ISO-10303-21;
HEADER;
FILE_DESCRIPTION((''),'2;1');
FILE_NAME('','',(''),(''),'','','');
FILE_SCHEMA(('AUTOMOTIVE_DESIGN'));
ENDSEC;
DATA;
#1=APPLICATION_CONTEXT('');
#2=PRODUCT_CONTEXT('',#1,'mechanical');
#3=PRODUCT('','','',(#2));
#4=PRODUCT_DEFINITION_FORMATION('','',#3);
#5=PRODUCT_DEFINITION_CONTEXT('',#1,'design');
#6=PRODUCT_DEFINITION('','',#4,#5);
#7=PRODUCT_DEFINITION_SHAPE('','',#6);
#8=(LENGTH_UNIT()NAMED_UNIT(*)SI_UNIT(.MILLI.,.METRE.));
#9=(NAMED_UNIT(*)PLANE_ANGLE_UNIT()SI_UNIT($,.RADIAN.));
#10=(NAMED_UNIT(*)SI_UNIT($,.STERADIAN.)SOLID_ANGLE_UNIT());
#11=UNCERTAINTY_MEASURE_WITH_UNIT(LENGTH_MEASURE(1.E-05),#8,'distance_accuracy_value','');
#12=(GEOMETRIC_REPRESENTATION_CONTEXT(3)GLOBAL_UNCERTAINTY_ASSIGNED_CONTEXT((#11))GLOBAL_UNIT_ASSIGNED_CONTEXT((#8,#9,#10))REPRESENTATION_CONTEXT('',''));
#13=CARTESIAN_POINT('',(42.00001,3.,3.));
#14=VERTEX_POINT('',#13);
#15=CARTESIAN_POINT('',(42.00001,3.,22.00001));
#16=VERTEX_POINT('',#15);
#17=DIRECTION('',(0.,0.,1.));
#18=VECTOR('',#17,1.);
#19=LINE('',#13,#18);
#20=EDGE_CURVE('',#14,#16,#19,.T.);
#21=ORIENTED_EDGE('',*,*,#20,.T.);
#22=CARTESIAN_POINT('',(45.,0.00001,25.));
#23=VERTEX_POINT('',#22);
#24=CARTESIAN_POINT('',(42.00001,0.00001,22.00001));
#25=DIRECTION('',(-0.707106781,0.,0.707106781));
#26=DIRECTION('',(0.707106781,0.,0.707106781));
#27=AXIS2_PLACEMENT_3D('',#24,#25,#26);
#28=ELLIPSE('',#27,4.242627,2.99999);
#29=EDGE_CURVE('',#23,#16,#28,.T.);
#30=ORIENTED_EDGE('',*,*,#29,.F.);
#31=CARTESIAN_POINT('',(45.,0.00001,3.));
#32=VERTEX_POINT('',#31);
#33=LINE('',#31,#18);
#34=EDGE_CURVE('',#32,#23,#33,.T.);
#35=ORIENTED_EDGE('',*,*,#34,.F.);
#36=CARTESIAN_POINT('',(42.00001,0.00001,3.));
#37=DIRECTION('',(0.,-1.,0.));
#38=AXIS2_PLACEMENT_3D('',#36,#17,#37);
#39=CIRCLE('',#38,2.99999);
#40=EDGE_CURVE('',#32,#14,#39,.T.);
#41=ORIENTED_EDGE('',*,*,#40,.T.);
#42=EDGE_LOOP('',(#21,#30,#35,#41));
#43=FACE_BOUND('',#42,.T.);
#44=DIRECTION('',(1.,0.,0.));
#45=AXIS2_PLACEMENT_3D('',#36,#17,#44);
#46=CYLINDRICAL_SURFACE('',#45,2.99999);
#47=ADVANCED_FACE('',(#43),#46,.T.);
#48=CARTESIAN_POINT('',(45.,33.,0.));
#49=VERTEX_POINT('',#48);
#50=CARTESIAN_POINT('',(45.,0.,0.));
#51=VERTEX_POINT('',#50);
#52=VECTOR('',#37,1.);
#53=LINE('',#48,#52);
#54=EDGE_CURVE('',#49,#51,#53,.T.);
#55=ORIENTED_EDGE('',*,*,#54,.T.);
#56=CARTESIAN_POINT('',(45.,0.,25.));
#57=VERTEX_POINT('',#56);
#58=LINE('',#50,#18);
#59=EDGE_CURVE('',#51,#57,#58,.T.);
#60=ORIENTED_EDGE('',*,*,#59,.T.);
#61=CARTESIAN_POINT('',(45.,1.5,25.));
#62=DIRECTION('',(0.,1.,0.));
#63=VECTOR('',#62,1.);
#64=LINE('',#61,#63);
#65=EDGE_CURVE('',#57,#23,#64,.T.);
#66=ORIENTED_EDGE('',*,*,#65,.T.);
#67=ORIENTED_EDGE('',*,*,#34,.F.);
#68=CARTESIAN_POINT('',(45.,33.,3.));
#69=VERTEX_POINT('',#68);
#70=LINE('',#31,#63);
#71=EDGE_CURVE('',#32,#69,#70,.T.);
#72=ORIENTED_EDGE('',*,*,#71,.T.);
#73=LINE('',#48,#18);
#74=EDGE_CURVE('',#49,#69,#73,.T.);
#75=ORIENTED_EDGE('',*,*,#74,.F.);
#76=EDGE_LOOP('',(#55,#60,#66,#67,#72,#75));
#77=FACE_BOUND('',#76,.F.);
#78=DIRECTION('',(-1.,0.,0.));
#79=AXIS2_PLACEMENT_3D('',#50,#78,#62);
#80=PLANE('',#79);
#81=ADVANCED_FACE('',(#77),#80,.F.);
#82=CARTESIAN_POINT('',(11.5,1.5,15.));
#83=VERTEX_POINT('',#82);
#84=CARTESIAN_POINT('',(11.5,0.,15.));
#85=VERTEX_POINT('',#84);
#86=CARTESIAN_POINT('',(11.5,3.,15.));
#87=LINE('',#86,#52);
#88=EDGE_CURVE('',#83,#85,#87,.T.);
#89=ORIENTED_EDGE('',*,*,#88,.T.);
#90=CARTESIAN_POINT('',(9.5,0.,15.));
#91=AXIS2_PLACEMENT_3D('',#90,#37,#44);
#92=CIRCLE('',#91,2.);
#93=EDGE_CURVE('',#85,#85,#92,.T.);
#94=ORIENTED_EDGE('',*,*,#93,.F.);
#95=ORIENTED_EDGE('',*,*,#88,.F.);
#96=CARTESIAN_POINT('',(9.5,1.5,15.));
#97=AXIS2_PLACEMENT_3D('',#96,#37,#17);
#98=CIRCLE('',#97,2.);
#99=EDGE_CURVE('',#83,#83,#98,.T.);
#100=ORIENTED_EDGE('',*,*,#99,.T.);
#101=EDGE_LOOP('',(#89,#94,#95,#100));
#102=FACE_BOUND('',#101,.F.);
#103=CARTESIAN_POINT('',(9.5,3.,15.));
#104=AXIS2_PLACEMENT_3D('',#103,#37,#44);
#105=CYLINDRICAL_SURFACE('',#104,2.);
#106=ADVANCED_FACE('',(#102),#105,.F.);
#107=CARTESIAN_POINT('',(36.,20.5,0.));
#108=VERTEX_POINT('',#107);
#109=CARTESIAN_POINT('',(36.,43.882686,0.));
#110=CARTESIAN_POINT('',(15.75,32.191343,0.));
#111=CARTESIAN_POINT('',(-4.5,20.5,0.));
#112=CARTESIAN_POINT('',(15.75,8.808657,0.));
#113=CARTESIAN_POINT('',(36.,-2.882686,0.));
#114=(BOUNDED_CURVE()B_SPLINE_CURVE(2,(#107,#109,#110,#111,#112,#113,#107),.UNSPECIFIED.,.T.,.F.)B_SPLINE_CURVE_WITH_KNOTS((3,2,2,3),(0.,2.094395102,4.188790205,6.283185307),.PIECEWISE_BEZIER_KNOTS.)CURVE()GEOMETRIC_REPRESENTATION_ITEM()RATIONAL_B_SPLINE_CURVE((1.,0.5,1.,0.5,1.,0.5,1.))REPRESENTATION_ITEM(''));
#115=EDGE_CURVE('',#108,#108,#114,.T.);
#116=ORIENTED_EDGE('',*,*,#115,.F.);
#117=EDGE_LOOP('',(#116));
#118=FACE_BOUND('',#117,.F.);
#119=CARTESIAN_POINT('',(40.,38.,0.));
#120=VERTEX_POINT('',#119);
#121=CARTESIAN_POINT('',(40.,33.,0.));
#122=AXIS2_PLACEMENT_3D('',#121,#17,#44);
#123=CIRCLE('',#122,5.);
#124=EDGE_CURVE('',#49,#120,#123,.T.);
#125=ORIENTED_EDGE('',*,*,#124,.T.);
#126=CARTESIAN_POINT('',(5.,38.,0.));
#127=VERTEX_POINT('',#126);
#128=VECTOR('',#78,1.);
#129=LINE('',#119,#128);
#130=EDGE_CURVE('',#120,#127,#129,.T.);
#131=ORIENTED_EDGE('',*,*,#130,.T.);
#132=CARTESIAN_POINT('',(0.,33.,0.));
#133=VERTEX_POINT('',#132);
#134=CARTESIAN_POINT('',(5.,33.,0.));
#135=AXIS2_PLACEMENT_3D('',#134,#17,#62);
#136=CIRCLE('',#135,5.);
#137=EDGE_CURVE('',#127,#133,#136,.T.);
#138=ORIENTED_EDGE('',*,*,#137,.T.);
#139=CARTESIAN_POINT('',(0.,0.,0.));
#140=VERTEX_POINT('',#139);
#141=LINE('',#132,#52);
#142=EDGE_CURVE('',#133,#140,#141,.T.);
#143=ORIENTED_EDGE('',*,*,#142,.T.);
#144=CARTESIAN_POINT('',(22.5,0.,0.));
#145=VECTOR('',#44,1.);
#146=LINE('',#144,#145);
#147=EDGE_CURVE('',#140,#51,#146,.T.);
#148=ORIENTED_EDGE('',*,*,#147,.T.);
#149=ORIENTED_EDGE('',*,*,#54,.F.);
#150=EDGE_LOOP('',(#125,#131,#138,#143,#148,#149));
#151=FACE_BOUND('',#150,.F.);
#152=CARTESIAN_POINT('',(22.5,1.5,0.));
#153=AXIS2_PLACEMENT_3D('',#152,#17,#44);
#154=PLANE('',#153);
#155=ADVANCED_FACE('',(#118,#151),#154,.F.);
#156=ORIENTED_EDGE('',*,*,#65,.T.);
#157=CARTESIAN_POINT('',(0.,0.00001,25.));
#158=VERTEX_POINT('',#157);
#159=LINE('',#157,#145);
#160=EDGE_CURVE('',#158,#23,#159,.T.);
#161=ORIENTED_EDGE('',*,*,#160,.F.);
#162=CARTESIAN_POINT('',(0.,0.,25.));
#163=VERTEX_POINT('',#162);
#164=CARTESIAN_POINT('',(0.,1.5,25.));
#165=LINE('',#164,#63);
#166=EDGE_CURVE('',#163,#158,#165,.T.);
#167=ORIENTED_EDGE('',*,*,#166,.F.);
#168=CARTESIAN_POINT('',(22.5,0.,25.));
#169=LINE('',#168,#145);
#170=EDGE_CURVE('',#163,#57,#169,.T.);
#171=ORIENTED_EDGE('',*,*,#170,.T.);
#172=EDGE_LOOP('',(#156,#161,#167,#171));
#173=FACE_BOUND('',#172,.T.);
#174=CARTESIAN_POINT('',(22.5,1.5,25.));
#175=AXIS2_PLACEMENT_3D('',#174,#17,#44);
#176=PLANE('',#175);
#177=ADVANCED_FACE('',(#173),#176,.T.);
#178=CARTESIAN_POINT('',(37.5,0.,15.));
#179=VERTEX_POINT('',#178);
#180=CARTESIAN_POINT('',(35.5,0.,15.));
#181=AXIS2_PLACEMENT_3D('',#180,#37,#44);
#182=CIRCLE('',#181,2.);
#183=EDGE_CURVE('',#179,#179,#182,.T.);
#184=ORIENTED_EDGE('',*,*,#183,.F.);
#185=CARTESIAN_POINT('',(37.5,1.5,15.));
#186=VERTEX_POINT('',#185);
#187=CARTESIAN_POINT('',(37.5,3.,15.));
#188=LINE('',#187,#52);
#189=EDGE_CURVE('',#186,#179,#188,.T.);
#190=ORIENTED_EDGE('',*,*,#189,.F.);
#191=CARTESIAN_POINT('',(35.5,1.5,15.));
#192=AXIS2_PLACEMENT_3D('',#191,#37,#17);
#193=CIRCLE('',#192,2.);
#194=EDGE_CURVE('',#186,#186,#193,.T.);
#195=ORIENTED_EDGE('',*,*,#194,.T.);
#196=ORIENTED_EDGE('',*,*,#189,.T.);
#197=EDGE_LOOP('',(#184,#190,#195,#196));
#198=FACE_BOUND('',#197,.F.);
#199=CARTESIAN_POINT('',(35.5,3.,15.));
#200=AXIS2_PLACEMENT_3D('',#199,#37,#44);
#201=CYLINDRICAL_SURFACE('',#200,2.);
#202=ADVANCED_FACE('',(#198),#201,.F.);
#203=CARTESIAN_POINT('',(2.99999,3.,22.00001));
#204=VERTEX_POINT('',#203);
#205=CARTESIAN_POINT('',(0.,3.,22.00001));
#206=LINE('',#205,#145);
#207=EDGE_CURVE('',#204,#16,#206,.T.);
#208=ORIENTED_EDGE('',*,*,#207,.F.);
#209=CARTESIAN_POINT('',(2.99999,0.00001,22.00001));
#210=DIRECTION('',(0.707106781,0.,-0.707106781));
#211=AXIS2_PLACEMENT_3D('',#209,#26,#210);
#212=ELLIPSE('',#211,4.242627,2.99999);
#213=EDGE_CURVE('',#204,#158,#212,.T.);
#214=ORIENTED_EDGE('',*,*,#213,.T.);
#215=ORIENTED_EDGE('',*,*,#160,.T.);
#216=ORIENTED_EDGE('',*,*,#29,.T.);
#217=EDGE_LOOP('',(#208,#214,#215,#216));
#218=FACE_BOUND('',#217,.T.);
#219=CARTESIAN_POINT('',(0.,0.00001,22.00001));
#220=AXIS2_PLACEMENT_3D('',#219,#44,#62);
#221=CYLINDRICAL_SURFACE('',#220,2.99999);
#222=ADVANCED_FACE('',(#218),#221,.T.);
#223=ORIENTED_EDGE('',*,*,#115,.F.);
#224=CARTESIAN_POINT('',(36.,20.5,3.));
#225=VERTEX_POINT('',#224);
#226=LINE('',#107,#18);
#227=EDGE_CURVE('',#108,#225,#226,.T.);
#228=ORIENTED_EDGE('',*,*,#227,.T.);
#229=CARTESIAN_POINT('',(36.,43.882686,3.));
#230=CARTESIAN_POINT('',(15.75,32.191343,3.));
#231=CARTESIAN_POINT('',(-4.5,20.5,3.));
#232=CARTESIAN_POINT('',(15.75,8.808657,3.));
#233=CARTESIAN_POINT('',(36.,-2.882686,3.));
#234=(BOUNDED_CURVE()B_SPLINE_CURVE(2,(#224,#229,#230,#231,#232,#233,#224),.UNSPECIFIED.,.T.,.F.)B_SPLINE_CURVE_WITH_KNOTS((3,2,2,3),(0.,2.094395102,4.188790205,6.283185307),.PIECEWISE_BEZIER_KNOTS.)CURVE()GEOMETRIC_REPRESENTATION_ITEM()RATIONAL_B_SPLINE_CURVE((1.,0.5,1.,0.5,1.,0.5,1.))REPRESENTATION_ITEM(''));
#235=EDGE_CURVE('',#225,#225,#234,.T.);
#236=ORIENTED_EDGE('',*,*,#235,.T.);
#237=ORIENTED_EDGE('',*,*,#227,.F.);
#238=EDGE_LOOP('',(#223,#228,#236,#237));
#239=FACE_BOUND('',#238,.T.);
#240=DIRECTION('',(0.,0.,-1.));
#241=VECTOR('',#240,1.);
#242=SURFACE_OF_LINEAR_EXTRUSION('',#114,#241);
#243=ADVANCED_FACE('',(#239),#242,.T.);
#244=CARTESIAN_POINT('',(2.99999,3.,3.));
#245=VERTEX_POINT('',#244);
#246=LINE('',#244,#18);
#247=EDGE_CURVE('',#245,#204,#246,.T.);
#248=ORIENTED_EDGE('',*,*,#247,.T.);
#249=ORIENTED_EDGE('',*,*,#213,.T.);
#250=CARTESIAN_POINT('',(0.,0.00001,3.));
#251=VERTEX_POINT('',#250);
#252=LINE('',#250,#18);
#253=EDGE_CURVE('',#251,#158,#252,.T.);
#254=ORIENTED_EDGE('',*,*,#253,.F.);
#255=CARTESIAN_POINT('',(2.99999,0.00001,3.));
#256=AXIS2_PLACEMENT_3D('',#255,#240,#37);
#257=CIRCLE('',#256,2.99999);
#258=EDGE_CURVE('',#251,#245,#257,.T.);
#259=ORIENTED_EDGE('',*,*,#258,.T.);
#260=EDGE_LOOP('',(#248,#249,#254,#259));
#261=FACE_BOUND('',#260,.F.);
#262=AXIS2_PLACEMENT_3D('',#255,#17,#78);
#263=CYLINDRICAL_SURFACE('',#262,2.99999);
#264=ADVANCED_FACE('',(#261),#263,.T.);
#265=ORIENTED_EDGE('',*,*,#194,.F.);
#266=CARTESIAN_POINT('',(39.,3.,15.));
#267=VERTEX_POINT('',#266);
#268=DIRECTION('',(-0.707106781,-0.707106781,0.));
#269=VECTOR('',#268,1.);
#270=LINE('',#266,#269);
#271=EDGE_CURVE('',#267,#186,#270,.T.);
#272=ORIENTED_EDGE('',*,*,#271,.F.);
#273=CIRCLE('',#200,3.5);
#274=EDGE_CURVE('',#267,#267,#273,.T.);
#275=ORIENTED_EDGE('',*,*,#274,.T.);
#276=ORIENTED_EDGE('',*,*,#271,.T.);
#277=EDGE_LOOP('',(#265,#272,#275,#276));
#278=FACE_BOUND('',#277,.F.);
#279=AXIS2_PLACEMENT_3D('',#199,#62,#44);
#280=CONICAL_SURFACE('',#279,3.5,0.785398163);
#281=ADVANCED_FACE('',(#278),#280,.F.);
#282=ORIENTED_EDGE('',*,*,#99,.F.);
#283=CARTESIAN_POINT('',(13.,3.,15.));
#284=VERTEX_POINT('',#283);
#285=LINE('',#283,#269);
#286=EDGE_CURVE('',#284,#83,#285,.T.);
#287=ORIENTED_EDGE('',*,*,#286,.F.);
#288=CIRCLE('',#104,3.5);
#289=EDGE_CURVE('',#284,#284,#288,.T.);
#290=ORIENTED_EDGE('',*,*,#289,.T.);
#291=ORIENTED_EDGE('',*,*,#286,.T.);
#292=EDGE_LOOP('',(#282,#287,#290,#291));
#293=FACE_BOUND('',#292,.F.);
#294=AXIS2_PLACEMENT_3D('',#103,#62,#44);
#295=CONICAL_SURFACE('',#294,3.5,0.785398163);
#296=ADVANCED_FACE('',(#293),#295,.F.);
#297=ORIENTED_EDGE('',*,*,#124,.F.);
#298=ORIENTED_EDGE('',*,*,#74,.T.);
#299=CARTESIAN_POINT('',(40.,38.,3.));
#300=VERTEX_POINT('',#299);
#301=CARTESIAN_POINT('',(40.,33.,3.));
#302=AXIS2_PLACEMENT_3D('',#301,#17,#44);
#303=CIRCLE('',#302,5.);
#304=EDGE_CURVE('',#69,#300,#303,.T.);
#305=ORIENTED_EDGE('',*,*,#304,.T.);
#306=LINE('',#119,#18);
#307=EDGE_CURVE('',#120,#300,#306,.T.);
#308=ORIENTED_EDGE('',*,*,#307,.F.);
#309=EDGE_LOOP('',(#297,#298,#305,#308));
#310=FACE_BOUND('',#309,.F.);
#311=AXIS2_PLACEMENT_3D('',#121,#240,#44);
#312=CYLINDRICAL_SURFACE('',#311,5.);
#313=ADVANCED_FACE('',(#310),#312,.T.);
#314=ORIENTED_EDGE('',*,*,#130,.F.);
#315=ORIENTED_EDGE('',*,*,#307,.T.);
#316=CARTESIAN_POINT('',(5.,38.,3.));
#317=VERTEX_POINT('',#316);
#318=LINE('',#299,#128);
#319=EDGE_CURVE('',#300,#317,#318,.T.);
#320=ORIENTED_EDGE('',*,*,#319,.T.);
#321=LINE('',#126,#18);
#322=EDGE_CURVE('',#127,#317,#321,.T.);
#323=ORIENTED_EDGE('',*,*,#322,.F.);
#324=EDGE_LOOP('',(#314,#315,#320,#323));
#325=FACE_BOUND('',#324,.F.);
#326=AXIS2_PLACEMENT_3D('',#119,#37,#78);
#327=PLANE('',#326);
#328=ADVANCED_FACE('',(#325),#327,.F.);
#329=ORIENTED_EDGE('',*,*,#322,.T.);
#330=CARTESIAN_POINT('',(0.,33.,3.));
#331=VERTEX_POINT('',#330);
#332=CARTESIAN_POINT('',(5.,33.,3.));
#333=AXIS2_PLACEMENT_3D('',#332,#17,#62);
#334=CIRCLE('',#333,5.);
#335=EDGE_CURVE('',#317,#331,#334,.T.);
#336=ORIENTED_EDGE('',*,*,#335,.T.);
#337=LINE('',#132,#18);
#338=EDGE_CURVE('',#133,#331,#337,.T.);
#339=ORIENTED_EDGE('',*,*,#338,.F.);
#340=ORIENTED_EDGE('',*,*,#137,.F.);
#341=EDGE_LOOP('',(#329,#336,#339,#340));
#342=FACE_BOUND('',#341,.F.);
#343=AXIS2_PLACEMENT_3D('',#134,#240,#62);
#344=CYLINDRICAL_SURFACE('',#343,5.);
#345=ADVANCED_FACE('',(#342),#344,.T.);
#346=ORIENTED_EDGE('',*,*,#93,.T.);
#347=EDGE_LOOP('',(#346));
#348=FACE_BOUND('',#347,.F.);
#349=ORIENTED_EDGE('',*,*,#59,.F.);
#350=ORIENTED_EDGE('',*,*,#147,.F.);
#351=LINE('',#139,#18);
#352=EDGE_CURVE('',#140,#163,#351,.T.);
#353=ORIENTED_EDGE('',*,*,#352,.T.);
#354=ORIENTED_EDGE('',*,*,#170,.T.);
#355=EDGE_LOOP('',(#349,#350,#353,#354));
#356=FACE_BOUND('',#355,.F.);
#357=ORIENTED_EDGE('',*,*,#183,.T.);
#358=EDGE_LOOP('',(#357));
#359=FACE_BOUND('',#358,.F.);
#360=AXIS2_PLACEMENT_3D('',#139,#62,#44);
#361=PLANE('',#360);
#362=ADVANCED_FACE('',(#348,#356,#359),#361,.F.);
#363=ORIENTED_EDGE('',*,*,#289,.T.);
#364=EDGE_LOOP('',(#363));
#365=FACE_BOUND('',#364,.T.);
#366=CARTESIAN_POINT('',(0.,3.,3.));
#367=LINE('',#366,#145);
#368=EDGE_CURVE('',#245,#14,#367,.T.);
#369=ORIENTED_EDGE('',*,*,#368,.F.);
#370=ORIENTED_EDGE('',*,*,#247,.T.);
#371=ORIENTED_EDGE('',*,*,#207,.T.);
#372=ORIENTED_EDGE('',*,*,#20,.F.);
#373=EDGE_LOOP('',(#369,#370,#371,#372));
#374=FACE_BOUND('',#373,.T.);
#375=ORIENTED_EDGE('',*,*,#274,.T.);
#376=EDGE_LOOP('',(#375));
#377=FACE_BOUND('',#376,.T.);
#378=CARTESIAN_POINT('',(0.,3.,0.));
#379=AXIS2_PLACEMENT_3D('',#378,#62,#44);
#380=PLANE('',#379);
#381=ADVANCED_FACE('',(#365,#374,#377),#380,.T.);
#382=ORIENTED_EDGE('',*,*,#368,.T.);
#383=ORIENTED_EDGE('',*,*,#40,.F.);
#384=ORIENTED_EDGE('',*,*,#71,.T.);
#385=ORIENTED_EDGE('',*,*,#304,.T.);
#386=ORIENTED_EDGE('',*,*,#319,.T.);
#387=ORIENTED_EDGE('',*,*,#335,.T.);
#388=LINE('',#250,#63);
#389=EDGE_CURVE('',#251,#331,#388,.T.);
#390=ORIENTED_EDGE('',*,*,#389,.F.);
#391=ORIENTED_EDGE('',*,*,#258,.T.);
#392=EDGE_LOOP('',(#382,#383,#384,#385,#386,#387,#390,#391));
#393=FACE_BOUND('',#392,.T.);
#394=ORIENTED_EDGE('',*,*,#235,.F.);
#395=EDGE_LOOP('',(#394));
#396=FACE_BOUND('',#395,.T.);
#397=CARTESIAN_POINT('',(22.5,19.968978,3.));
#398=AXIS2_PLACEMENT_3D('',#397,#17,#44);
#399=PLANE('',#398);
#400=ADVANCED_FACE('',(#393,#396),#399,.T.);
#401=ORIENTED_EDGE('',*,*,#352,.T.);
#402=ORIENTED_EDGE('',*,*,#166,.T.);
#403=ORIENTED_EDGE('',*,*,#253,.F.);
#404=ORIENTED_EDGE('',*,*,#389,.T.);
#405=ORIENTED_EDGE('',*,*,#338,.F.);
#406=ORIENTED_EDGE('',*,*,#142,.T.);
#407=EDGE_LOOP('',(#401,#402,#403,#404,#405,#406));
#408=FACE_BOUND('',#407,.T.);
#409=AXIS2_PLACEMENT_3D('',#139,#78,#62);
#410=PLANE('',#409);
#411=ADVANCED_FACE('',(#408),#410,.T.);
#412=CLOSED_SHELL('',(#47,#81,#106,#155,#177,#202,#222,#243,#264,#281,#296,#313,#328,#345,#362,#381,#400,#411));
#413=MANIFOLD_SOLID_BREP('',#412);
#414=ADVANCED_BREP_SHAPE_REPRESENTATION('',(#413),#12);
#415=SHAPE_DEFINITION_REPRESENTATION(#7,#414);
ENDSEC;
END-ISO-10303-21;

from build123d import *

# Parameters (mm, degrees)
F1_DEPTH       = 3
F0_W           = 45
F0_H           = 3
F2_DEPTH       = 25
F4_D           = 4
F4_CSINK_D     = 7
F4_CSINK_ANGLE = 90
F5_R           = 2.99999


# Not quite as in the source:
# - a fillet or chamfer is up to 0.001 mm smaller than in the source, because OpenCascade refuses the exact size


with BuildPart() as f1:
    # F0 (on Top) → F1 (new body)
    with BuildSketch(Plane.XY):
        with BuildLine():
            Line((0, 33), (0, 3))
            Line((0, 3), (45, 3))
            Line((45, 3), (45, 33))
            ThreePointArc((45, 33), (43.5355339059, 36.5355339059), (40, 38))
            Line((40, 38), (5, 38))
            ThreePointArc((5, 38), (1.4644660941, 36.5355339059), (0, 33))
        make_face()
        with BuildLine():
            add(Edge.make_bspline(
                [(36, 20.5), (36, 43.8826859022), (15.75, 32.1913429511), (-4.5, 20.5), (15.75, 8.8086570489), (36, -2.8826859022), (36, 20.5)],
                knots=[0, 0, 0, 2.0943951024, 2.0943951024, 4.1887902048, 4.1887902048, 6.2831853072, 6.2831853072, 6.2831853072], degree=2, weights=[1, 0.5, 1, 0.5, 1, 0.5, 1]))
        make_face(mode=Mode.SUBTRACT)
    extrude(amount=F1_DEPTH)

    # F0 (on Top) → F2 (join)
    with BuildSketch(Plane.XY):
        with Locations((22.5, 1.5)):
            Rectangle(F0_W, F0_H)
    extrude(amount=F2_DEPTH)

    # F4 (through all)
    with Locations(Plane(origin=(0, 3, 0), x_dir=(-1, 0, 0), z_dir=(0, 1, 0))):
        with Locations((-35.5, 15), (-9.5, 15)):
            CounterSinkHole(F4_D / 2, F4_CSINK_D / 2, counter_sink_angle=F4_CSINK_ANGLE)

    # F5 (radius 3 in the source; OpenCascade refuses exactly that, so slightly less here)
    f5_edges = [f1.edges().sort_by_distance(p)[0] for p in [
        (45, 3, 14),
        (22.5, 3, 25),
        (0, 3, 14),
    ]]
    fillet(f5_edges, radius=F5_R)


solid = f1.part
